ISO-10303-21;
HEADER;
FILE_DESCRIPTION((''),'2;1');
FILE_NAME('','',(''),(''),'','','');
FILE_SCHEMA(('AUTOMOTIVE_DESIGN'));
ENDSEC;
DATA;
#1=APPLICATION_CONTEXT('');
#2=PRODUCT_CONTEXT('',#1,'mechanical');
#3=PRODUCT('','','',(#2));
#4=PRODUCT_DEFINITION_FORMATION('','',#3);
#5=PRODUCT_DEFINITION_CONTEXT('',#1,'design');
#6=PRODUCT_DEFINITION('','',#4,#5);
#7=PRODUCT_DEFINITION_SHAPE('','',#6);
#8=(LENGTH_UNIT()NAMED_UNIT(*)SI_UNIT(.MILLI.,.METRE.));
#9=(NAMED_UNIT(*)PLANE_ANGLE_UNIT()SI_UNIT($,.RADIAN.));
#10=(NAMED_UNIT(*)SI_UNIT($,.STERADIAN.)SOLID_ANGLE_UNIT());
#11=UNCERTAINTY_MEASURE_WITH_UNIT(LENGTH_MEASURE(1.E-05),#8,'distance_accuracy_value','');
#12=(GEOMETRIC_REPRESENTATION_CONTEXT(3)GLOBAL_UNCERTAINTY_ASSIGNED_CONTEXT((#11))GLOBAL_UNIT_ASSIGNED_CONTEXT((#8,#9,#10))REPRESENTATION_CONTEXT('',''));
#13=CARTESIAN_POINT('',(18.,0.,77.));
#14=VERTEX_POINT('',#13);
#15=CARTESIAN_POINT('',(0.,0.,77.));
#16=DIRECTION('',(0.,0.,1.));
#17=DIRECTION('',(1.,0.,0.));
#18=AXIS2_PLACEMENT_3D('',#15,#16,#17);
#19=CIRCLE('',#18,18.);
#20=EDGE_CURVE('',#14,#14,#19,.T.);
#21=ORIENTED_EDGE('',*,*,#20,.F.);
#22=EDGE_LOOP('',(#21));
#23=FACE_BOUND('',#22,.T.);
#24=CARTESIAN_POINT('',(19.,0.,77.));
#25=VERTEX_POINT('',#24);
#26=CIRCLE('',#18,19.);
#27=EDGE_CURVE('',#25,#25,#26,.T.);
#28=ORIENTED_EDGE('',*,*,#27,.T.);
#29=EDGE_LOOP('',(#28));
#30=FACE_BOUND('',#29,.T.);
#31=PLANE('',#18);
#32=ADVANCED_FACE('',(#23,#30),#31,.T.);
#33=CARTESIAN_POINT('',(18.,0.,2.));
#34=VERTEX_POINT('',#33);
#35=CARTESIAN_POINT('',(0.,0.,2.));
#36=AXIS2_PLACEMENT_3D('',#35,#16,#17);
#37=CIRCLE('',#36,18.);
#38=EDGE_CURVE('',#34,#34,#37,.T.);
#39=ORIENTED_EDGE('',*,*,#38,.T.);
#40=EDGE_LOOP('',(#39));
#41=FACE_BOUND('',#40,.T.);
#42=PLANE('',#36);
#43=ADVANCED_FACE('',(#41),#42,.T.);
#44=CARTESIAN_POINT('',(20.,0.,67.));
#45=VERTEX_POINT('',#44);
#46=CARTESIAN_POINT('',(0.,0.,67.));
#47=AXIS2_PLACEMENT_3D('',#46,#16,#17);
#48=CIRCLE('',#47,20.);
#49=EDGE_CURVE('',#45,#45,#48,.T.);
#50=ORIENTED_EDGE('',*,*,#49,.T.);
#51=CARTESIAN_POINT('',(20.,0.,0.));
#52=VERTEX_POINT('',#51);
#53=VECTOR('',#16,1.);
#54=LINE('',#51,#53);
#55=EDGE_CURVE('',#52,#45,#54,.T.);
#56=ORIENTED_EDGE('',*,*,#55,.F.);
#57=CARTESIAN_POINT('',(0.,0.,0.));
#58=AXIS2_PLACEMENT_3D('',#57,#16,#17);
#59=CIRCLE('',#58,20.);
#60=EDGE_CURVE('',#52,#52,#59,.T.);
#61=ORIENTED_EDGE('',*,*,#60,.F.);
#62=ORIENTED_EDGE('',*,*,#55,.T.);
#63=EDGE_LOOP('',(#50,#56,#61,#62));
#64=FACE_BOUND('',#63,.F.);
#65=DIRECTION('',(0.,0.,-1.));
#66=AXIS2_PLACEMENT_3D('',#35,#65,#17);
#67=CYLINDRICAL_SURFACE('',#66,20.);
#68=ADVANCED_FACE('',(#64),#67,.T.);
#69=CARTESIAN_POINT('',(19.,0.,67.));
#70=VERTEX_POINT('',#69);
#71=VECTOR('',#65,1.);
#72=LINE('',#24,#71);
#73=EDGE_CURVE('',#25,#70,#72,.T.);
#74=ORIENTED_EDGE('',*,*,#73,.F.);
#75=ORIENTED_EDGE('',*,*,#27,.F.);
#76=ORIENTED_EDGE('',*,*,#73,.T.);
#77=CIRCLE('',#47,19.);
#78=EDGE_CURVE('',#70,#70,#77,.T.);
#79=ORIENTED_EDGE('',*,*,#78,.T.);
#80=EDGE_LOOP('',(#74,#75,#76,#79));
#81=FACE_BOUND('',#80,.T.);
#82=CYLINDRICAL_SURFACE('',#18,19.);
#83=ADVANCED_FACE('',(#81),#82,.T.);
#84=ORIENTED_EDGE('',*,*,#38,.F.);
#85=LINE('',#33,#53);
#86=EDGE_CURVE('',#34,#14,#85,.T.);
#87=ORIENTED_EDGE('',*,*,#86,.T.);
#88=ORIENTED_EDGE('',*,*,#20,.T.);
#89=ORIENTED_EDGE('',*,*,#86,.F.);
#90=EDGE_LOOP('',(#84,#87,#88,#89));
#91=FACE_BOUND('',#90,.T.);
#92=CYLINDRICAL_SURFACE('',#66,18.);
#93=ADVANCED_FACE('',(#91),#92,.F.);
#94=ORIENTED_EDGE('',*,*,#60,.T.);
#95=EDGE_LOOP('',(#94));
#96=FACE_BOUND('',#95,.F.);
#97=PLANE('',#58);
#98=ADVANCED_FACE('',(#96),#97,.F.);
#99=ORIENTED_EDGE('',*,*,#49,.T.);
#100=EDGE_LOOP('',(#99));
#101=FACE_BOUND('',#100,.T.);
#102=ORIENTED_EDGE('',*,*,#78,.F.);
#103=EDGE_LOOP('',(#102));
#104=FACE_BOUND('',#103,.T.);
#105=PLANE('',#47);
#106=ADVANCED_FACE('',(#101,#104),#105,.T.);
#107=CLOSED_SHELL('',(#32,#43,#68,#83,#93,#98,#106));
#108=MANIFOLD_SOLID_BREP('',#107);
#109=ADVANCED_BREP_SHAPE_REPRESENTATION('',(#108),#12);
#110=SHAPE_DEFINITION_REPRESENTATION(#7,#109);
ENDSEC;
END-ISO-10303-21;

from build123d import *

# Parameters (mm, degrees)
F0_R     = 20
F1_DEPTH = 2
F2_R     = 20
F2_R_2   = 18
F3_DEPTH = 75
F4_R     = 20
F4_R_2   = 19
F5_DEPTH = 10


with BuildPart() as f1:
    # F0 (on Top) → F1 (new body)
    with BuildSketch(Plane.XY):
        Circle(F0_R)
    extrude(amount=F1_DEPTH)

    # F2 (on face) → F3 (join)
    with BuildSketch(Plane.XY.offset(2)):
        Circle(F2_R)
        Circle(F2_R_2, mode=Mode.SUBTRACT)
    extrude(amount=F3_DEPTH)

    # F4 (on face) → F5 (cut)
    with BuildSketch(Plane.XY.offset(77)):
        Circle(F4_R)
        Circle(F4_R_2, mode=Mode.SUBTRACT)
    extrude(amount=-F5_DEPTH, mode=Mode.SUBTRACT)


solid = f1.part
